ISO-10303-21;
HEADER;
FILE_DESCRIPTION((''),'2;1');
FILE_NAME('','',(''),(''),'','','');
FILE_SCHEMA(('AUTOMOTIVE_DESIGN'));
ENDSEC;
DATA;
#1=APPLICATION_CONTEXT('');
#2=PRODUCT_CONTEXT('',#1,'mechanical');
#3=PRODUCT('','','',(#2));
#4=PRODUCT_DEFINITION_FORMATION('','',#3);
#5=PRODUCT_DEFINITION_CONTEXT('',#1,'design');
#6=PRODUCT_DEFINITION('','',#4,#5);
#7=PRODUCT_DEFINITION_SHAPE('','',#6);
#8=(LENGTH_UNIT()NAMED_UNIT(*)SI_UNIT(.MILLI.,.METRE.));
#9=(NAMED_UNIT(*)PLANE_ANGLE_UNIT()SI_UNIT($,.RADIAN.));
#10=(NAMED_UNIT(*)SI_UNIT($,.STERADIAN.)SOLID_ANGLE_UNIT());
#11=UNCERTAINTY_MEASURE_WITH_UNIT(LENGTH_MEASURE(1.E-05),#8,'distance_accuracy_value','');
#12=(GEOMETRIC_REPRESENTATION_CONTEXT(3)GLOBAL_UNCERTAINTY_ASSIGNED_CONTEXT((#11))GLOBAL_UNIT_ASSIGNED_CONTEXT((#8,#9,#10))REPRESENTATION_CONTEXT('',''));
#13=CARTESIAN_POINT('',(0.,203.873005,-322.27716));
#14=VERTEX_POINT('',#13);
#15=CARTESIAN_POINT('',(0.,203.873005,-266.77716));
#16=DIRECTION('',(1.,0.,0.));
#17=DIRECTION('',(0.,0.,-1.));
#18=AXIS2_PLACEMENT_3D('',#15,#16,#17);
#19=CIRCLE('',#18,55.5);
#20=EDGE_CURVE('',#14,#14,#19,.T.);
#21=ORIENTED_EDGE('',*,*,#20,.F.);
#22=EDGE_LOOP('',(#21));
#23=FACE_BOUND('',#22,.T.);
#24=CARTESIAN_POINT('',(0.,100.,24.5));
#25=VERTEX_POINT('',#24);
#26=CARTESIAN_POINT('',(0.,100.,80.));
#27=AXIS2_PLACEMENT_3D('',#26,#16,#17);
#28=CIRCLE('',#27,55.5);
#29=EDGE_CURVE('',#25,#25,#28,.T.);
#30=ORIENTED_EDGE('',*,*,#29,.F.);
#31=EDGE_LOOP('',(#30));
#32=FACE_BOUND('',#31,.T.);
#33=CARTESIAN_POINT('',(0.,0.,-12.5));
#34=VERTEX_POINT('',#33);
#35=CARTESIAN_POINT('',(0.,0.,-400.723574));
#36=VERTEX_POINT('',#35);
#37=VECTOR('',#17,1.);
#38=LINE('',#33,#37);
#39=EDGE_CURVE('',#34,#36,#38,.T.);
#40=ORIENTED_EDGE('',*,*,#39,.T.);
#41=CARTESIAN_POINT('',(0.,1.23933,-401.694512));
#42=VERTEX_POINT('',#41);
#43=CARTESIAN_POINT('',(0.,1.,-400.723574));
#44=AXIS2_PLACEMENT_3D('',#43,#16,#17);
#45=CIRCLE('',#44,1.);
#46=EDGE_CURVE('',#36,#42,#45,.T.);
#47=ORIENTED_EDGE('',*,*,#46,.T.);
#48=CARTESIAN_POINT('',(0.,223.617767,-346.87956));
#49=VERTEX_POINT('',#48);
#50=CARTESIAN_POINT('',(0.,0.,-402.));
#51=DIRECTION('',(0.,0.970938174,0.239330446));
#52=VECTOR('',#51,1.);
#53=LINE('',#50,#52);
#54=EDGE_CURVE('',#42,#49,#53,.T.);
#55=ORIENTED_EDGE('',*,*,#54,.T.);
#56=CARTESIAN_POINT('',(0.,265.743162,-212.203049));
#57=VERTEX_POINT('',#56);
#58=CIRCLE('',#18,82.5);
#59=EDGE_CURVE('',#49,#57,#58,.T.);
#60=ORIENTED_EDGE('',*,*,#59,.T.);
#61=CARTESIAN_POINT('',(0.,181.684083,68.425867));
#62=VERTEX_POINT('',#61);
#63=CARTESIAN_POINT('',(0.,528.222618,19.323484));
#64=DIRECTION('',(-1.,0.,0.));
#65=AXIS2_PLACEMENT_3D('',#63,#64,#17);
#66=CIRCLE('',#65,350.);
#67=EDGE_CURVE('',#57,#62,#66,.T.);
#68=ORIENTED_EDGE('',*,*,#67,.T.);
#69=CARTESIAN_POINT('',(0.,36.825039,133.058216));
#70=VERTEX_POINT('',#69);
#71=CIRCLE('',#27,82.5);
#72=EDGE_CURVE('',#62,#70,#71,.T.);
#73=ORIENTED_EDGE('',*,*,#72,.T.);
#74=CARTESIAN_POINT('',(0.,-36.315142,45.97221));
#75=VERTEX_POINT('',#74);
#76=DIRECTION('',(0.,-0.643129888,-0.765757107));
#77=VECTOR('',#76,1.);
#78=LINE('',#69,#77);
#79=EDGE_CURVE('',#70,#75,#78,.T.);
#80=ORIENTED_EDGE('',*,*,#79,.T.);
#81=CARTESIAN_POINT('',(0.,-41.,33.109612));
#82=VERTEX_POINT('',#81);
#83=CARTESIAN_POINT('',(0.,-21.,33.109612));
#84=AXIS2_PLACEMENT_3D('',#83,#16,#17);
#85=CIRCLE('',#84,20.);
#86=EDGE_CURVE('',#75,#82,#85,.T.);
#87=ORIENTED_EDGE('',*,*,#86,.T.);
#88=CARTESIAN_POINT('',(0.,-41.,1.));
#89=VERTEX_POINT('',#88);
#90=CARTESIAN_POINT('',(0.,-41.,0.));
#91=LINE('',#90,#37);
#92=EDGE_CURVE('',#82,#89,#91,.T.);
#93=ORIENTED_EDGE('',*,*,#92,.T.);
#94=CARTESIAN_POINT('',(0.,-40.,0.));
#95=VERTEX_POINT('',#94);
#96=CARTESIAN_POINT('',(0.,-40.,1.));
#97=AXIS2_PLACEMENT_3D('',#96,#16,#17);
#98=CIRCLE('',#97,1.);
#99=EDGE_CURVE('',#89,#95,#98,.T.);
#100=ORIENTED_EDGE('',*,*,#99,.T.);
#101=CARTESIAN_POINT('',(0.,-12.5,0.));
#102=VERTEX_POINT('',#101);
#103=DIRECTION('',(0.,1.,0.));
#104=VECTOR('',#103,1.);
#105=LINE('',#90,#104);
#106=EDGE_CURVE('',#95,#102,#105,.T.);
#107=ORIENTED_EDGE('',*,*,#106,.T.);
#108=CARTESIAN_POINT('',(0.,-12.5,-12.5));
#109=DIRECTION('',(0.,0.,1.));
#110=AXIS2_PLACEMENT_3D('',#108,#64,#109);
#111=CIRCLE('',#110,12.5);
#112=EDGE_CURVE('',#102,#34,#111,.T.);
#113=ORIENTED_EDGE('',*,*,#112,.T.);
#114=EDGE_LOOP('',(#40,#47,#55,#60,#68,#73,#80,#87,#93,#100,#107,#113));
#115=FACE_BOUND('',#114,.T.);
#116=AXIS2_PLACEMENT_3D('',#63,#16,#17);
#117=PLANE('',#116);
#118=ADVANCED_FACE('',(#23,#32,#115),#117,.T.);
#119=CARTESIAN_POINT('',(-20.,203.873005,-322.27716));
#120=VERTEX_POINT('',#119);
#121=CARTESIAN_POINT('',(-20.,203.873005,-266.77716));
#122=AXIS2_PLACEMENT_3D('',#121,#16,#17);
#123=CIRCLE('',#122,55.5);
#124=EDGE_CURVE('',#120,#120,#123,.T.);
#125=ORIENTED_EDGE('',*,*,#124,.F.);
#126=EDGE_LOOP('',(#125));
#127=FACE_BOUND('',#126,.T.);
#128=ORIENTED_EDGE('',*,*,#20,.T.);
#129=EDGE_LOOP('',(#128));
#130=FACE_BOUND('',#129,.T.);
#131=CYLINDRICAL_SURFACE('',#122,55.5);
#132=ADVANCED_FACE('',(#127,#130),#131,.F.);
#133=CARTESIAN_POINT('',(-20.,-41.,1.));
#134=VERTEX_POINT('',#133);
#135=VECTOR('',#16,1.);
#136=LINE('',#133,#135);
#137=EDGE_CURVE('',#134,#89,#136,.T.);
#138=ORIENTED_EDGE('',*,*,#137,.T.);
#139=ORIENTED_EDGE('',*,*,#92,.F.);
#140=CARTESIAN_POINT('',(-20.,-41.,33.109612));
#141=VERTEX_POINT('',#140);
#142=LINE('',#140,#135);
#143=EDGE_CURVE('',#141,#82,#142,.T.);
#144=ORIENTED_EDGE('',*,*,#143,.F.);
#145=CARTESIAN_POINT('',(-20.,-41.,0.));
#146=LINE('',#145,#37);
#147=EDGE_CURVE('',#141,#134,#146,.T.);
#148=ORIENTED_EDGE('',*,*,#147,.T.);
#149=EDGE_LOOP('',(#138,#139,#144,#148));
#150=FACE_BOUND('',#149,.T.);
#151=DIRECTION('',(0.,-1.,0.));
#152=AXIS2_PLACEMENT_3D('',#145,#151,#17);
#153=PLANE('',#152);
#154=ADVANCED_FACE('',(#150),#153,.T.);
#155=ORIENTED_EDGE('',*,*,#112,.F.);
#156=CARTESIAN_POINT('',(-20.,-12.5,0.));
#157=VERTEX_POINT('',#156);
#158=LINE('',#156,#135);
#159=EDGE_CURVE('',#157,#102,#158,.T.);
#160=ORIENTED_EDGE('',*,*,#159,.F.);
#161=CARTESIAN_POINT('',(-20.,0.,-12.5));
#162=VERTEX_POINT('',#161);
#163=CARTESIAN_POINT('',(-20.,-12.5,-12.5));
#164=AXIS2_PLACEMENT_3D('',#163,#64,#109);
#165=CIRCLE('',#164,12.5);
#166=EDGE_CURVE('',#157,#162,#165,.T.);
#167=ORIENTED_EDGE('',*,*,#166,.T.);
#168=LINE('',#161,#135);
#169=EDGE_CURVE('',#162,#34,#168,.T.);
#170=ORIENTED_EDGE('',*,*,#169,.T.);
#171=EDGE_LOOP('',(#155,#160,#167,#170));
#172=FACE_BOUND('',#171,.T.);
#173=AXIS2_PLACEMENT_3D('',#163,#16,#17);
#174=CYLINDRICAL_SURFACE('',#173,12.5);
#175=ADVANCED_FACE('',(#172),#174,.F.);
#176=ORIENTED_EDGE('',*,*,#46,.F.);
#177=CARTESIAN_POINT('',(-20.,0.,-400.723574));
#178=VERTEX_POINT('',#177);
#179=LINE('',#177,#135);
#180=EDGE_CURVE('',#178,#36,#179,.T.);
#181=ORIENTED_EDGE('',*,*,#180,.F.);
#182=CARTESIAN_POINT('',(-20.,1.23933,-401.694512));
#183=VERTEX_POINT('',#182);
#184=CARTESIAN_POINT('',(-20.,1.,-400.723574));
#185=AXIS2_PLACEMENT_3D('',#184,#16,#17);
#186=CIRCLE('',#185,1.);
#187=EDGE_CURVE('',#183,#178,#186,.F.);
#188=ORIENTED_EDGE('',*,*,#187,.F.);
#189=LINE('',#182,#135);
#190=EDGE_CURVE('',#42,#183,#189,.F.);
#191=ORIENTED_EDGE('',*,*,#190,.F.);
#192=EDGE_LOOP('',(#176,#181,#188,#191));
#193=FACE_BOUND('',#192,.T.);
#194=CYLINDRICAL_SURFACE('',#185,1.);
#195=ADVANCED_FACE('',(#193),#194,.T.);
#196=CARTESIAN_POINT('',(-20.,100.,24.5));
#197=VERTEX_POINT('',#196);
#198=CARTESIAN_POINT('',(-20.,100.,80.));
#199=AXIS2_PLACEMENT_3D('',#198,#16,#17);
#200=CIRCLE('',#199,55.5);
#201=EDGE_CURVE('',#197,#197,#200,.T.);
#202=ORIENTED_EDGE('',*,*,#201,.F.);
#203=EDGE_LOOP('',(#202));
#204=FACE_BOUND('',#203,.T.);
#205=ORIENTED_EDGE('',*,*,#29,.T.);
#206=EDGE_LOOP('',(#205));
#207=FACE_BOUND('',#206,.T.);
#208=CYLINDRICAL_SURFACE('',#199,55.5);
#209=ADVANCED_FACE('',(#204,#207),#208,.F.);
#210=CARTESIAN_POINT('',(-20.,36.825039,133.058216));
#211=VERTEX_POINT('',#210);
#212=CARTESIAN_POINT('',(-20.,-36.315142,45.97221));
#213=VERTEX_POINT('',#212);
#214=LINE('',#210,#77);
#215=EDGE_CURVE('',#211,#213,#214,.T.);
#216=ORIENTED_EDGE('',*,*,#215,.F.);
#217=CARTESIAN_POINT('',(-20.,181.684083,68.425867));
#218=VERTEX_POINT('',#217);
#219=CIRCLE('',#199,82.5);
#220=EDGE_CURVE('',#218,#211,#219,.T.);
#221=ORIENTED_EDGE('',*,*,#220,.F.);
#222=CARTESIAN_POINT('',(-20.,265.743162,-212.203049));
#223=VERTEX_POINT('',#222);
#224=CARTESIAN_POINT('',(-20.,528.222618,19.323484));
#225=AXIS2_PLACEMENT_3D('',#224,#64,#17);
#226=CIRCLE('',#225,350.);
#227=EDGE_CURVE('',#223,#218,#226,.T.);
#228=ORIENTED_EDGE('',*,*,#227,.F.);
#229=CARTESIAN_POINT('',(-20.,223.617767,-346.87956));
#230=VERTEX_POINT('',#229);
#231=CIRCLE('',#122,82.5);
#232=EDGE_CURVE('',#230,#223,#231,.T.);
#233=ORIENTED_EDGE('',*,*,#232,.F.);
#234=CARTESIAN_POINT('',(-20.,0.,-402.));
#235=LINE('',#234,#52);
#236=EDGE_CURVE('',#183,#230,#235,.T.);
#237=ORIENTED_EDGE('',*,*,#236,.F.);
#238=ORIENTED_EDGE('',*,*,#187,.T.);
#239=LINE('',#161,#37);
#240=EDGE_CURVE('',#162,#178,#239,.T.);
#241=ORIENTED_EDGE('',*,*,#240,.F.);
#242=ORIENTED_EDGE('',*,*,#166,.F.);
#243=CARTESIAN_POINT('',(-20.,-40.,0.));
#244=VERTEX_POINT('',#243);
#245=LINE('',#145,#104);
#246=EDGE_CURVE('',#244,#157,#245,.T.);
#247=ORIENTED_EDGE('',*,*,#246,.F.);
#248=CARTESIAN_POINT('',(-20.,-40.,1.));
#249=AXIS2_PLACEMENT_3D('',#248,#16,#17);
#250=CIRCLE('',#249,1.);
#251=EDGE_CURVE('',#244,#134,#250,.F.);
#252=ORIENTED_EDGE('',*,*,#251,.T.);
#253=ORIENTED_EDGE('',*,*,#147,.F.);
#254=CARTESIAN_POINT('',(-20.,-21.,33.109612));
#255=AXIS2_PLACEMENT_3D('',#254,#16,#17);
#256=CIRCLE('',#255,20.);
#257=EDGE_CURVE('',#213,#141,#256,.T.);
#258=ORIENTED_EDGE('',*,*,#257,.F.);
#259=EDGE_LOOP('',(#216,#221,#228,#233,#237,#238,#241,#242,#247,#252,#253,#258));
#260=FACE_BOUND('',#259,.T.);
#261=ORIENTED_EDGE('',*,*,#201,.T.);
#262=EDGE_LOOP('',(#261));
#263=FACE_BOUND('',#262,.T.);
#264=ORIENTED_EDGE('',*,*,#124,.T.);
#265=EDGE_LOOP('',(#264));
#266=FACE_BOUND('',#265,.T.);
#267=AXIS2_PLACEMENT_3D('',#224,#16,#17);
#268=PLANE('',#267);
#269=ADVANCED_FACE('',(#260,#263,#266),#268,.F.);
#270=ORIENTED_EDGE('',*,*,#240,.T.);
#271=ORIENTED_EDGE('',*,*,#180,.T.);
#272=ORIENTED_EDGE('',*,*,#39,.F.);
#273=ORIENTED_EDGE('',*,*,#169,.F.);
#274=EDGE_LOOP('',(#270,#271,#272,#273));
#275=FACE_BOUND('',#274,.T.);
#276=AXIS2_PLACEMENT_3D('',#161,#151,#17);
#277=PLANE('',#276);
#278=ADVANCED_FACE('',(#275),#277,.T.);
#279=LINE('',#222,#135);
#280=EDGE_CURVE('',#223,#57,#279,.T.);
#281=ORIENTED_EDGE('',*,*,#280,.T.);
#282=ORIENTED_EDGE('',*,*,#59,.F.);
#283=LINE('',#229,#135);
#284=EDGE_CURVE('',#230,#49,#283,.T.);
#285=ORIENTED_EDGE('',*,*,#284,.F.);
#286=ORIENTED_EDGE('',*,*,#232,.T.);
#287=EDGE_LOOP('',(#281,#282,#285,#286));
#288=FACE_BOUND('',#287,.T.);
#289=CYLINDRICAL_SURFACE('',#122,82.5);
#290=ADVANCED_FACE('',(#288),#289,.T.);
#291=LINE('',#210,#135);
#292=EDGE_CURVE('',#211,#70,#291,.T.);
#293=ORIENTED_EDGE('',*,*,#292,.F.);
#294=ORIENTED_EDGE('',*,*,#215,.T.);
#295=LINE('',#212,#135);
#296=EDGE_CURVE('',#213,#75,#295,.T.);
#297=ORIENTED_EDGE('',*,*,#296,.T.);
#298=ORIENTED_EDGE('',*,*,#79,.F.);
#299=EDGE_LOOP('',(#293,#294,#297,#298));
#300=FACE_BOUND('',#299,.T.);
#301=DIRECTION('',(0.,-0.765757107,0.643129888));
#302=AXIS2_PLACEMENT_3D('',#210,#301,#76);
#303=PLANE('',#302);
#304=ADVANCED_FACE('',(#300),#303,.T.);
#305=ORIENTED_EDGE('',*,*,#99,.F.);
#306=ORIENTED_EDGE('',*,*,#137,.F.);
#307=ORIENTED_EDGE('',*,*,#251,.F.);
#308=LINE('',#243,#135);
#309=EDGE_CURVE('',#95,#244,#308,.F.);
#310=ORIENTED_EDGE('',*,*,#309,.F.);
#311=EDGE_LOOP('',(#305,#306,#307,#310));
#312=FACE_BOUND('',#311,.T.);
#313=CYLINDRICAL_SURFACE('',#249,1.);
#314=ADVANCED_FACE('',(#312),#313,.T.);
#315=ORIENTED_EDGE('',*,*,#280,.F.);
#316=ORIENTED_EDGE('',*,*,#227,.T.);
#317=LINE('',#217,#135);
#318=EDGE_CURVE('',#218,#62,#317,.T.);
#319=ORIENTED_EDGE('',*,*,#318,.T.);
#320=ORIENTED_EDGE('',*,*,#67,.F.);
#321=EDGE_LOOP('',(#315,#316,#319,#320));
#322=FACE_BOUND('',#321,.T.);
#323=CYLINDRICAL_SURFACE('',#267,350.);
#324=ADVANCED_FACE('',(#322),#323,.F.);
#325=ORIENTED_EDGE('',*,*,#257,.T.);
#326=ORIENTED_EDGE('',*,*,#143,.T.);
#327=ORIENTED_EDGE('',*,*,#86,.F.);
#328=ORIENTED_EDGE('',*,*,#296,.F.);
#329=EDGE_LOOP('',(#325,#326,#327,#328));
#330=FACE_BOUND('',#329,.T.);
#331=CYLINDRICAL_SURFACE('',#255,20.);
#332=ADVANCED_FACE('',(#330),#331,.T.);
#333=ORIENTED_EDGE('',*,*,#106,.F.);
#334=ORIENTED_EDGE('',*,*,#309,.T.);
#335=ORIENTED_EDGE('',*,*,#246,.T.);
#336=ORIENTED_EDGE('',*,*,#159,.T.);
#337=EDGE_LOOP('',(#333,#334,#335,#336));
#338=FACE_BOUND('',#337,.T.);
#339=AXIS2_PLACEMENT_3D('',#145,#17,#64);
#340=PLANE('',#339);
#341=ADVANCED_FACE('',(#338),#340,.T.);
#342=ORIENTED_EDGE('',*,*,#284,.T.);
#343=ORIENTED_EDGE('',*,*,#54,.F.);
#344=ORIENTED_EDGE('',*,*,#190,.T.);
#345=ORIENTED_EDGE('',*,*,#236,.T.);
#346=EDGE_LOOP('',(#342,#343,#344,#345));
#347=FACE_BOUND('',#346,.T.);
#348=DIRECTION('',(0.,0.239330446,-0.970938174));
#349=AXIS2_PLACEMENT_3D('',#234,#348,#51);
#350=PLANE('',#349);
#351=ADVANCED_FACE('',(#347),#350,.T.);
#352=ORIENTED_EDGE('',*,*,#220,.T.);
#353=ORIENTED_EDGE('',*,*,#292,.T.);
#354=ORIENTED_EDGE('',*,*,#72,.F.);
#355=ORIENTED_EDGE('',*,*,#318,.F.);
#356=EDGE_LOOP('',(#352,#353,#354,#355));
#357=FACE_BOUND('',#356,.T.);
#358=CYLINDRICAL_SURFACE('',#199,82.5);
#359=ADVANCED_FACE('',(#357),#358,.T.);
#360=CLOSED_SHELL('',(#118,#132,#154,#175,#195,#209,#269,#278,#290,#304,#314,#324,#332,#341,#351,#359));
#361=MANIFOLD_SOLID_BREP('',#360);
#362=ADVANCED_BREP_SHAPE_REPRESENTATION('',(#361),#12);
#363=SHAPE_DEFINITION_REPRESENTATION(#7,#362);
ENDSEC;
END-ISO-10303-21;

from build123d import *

# Parameters (mm, degrees)
SKETCH1_R          = 55.5
BASE_FLANGE1_DEPTH = 20
FILLET_1_0_R       = 1


# Sheet-metal steps are written as plain solids
with BuildPart() as part:
    # Sketch1 → Base-Flange1 (new body)
    with BuildSketch(Plane(origin=(0, 0, 0), x_dir=(0, 0, -1), z_dir=(1, 0, 0))):
        with BuildLine():
            Line((0, -41), (0, -12.5))
            ThreePointArc((0, -12.5), (3.661165235, -3.661165235), (12.5, 0))
            Line((12.5, 0), (402, 0))
            Line((402, 0), (346.87955959, 223.617766639))
            ThreePointArc((346.87955959, 223.617766639), (291.405611492, 282.611111197), (212.20304892, 265.743162247))
            ThreePointArc((212.20304892, 265.743162247), (81.106216912, 192.940833045), (-68.425866876, 181.684083165))
            ThreePointArc((-68.425866876, 181.684083165), (-155.341011221, 133.615205312), (-133.058215758, 36.825038658))
            Line((-133.058215758, 36.825038658), (-45.972209781, -36.315142143))
            ThreePointArc((-45.972209781, -36.315142143), (-39.95421417, -39.792323471), (-33.109612021, -41))
            Line((-33.109612021, -41), (0, -41))
        make_face()
        with Locations((-80, 100)):
            Circle(SKETCH1_R, mode=Mode.SUBTRACT)
        with Locations((266.777160234, 203.873004866)):
            Circle(SKETCH1_R, mode=Mode.SUBTRACT)
    extrude(amount=-BASE_FLANGE1_DEPTH)

    # Fillet-1.0
    fillet_1_0_edges = [part.edges().sort_by_distance(p)[0] for p in [
        (-10, 0, -402),
        (-10, -41, 0),
    ]]
    fillet(fillet_1_0_edges, radius=FILLET_1_0_R)


solid = part.part
